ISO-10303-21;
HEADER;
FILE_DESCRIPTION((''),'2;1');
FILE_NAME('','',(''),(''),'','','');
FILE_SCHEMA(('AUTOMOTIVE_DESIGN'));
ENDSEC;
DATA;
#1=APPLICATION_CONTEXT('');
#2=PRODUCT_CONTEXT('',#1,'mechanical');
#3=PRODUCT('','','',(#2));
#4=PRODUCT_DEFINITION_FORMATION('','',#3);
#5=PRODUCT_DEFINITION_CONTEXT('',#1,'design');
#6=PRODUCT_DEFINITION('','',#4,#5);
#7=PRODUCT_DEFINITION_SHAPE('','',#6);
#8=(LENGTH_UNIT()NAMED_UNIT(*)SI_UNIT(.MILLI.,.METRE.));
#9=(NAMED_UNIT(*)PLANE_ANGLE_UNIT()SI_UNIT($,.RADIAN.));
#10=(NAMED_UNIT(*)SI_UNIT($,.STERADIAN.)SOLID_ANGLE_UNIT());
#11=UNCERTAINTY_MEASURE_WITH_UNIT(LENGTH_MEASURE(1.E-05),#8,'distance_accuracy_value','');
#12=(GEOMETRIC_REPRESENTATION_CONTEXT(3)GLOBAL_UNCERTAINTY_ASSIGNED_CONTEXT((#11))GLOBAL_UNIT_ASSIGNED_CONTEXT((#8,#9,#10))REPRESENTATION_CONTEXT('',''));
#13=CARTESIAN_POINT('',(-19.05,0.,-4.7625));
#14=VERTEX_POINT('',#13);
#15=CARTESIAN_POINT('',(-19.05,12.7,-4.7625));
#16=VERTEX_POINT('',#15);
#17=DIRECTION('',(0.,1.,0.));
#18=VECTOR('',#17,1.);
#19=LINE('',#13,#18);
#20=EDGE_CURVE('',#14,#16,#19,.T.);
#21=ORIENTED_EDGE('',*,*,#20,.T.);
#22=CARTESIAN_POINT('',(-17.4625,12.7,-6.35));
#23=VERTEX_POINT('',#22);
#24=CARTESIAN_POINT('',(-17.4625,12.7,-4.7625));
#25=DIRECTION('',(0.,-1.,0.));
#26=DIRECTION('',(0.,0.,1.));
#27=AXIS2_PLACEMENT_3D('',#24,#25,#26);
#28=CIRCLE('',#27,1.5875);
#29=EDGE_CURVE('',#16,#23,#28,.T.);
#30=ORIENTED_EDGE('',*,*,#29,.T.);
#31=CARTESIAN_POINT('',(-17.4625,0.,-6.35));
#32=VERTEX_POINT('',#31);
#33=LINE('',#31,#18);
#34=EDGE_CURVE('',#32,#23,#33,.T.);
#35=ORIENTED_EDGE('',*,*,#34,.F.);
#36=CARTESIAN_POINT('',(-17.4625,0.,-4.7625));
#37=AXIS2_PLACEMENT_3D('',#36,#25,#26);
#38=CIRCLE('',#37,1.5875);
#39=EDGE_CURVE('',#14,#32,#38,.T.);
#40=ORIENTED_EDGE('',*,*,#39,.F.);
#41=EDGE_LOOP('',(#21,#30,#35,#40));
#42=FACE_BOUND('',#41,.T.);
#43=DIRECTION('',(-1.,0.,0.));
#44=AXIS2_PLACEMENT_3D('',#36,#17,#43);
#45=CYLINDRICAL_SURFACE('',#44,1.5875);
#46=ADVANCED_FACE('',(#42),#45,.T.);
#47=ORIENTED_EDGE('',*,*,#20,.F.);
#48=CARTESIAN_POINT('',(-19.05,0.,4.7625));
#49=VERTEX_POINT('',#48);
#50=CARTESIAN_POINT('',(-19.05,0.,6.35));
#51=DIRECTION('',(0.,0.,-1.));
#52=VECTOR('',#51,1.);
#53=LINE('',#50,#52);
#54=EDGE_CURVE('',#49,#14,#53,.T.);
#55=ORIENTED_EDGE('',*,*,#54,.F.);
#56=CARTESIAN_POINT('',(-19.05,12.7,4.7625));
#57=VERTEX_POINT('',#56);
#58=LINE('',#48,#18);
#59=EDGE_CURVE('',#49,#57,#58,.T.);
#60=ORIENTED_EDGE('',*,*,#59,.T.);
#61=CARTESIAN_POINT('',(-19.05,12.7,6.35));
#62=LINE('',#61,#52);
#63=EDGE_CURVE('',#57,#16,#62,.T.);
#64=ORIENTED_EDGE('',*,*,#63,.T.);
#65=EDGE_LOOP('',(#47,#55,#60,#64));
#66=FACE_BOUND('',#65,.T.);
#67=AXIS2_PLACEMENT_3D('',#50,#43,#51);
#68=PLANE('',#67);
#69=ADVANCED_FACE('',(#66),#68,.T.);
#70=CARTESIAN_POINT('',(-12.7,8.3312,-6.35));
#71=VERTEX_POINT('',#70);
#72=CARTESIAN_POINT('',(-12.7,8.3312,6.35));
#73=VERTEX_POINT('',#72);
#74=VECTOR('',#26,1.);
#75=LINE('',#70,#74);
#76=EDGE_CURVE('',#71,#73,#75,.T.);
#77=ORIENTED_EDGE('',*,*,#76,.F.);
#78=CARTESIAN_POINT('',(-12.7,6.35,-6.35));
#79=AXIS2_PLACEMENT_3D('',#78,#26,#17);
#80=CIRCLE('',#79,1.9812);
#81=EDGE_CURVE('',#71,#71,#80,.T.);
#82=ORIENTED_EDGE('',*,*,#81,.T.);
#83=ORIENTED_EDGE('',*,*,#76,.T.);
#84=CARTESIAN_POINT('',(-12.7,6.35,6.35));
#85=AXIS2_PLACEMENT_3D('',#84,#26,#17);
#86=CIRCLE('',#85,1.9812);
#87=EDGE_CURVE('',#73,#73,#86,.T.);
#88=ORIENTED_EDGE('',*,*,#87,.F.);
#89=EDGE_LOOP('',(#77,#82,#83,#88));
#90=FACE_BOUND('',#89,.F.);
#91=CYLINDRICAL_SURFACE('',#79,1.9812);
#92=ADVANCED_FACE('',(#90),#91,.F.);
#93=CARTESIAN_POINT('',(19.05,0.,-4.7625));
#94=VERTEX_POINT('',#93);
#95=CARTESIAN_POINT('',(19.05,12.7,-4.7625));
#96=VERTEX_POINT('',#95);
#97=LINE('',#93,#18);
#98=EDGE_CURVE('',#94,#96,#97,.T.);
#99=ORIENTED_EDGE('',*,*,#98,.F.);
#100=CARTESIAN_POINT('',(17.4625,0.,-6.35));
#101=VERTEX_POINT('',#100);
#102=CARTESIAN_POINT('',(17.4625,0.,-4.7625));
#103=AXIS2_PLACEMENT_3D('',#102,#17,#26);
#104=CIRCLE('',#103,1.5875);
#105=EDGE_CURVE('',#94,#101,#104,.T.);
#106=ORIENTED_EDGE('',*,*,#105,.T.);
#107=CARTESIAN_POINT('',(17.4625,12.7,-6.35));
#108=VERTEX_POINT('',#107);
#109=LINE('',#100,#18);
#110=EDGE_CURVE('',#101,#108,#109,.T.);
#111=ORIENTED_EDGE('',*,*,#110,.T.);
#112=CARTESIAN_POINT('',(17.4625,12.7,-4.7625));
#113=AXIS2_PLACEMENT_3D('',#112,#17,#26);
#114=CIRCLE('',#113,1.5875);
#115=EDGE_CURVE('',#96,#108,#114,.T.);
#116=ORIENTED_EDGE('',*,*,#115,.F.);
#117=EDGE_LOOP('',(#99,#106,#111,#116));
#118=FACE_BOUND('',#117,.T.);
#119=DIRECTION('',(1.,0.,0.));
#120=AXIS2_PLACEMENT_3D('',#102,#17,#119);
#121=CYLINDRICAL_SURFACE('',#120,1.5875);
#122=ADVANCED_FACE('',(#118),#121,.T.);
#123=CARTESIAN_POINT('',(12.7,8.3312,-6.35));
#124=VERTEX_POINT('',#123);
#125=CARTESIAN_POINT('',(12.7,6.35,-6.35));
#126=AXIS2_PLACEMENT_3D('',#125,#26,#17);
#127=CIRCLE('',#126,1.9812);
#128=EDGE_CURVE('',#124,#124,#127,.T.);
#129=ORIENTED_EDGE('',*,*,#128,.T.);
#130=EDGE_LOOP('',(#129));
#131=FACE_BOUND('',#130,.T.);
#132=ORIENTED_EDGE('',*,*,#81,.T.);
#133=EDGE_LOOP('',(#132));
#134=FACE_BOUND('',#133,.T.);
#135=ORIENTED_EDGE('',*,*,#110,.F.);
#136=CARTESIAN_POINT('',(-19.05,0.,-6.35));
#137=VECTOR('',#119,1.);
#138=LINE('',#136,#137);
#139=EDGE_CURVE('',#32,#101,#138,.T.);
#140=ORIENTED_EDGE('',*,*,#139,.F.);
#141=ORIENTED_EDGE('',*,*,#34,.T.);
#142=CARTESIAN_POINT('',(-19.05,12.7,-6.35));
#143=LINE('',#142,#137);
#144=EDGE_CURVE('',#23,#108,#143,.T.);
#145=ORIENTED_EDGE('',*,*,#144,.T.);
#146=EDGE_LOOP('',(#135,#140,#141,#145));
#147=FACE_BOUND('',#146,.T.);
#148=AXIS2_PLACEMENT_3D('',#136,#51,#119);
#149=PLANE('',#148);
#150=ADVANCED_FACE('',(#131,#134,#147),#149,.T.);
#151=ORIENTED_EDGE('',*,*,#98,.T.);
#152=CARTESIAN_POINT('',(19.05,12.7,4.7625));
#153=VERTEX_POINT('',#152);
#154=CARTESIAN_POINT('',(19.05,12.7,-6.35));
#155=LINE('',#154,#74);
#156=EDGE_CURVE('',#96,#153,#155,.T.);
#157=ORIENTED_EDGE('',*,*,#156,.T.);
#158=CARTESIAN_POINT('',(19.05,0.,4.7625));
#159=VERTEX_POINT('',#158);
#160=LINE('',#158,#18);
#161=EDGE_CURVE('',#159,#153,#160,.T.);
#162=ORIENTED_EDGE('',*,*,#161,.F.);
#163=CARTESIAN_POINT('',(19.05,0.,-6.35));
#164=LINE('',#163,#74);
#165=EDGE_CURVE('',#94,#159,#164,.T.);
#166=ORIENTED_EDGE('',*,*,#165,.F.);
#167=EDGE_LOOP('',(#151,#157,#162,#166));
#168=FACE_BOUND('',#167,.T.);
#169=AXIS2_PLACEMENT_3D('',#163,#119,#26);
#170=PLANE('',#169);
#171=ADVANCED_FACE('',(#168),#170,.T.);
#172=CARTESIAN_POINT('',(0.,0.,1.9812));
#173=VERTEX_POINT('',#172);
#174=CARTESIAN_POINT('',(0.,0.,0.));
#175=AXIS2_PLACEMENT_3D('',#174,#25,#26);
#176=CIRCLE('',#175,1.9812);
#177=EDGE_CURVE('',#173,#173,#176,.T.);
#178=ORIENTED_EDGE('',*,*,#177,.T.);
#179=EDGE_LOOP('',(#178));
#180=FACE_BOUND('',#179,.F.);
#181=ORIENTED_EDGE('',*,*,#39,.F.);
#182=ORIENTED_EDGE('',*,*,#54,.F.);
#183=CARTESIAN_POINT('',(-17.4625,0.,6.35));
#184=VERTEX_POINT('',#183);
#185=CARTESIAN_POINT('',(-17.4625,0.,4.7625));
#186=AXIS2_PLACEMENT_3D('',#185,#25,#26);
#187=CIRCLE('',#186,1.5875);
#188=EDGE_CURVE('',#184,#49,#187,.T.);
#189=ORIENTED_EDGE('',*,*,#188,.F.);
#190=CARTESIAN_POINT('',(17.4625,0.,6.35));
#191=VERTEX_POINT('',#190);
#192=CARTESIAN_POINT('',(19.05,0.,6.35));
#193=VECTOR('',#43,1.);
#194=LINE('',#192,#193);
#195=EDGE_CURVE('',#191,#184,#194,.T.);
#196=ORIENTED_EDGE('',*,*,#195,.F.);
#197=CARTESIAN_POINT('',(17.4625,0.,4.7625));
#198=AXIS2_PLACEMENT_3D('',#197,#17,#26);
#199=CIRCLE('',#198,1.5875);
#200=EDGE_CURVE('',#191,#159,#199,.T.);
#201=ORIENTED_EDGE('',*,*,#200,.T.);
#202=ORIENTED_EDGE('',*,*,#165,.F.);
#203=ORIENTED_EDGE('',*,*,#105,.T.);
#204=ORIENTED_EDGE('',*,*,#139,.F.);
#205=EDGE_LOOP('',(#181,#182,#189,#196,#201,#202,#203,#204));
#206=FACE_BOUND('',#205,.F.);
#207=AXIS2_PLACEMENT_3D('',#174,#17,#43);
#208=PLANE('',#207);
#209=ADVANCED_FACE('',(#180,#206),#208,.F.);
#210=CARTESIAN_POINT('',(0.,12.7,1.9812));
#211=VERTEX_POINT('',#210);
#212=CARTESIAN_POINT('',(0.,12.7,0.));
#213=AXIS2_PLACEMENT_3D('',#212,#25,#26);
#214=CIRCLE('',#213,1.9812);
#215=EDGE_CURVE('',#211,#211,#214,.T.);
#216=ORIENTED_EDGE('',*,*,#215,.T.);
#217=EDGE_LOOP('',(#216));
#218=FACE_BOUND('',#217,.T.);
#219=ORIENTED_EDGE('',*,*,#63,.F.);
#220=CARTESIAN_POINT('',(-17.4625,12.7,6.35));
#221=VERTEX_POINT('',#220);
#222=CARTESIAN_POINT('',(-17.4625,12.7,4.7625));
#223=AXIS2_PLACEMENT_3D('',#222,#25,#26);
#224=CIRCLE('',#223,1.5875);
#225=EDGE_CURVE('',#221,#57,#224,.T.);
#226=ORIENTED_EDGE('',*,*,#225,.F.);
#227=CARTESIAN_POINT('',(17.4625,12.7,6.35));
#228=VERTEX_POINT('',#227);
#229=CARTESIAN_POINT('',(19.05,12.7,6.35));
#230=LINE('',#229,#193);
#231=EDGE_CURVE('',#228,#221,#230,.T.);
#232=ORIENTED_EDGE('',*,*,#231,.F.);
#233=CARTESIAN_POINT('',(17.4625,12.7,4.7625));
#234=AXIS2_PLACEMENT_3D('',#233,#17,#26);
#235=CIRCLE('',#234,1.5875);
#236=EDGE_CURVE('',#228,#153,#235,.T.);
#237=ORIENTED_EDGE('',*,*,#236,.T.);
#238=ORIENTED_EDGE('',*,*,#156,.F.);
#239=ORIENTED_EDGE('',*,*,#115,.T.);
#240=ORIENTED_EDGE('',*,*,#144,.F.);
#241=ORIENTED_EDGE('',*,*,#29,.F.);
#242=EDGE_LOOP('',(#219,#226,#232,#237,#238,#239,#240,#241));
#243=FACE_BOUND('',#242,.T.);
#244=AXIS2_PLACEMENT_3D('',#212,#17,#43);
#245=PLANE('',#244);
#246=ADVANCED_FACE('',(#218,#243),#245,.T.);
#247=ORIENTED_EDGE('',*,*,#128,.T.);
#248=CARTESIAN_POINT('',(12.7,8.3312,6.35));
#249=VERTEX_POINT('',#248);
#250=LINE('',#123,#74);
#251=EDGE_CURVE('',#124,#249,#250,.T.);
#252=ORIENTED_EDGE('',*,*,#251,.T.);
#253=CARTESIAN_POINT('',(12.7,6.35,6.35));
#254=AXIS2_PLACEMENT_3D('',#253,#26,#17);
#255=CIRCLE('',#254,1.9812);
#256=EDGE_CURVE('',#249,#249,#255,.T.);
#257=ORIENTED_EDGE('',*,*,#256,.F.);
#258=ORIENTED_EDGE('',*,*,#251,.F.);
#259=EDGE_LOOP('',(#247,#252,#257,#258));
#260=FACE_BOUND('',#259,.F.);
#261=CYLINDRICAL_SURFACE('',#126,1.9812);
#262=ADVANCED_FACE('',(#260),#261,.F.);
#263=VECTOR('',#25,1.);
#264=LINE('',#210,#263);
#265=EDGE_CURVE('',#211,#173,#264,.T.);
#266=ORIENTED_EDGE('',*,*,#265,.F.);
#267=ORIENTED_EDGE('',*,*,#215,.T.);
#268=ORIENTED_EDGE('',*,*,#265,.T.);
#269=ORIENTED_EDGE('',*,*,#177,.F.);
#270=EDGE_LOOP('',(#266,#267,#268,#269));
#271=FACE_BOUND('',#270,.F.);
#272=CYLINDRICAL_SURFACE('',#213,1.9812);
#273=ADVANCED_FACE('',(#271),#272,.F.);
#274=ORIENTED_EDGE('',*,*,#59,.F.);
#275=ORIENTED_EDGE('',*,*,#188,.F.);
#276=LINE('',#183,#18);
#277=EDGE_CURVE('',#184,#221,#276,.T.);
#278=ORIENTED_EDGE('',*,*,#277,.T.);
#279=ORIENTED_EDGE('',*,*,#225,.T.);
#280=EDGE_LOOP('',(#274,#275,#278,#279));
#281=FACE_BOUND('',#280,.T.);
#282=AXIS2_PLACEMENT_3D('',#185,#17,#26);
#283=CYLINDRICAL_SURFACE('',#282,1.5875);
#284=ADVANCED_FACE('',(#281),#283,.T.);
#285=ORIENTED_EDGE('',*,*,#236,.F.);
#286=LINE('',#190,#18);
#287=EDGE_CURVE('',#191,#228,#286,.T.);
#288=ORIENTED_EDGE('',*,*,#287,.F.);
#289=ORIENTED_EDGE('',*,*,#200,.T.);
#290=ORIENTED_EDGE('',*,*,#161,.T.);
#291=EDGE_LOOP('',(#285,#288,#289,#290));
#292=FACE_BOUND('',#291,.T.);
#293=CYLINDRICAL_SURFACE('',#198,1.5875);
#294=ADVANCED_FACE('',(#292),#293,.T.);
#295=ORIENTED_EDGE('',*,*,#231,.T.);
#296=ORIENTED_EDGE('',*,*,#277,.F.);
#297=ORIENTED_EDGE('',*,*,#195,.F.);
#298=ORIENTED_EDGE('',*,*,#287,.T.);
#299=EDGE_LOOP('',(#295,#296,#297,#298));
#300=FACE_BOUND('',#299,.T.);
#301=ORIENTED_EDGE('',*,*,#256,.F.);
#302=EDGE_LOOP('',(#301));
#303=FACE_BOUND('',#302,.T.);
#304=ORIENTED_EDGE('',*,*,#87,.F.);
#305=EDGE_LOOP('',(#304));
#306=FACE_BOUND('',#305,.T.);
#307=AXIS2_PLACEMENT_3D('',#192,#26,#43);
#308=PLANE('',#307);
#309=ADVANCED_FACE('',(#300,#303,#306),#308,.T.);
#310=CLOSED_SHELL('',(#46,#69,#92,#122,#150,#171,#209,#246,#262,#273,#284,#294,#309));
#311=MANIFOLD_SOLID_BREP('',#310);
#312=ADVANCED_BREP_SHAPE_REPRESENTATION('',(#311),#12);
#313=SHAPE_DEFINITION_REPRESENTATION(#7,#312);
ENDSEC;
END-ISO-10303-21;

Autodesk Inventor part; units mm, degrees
ref_plane "YZ Plane" through (0, 0, 0) normal (1, 0, 0) x (0, 1, 0)
ref_plane "XZ Plane" through (0, 0, 0) normal (0, 1, 0) x (-1, 0, 0)
ref_plane "XY Plane" through (0, 0, 0) normal (0, 0, 1) x (1, 0, 0)
sketch "Sketch1" plane through (0, 0, 0) normal (0, 1, 0) x (-1, 0, 0)
  line L0 (-19.05, 6.35) -> (19.05, 6.35)
  line L1 (19.05, 6.35) -> (19.05, -6.35)
  line L2 (19.05, -6.35) -> (-19.05, -6.35)
  line L3 (-19.05, -6.35) -> (-19.05, 6.35)
  line L4 (-19.05, 6.35) -> (19.05, -6.35) construction
  line L5 (19.05, 6.35) -> (-19.05, -6.35) construction
  point P0 (0, 0)
  dimension "d0" = 38.1
  dimension "d1" = 12.7
extrude "Plate1" add sketch "Sketch1" along normal blind 12.7
sketch "Sketch2" plane through (19.05, 0, -6.35) normal (0, 0, -1) x (-1, 0, 0)
  line L0 (0, 0) -> (38.1, 0) construction
  line L1 (19.05, 0) -> (19.05, 12.7) construction
  line L2 (38.1, 12.7) -> (0, 12.7) construction
  point P0 (6.35, 6.35)
  point P1 (31.75, 6.35)
  dimension "d3" = 25.4
  dimension "d4" = 6.35
hole "Hole1" at (12.7, 6.35, -6.35) at (-12.7, 6.35, -6.35) direction (0, 0, 1) diameter 3.9624 end through all thread size "10-32 UNF" class "2B" standard "ANSI Unified Screw Threads"
sketch "Sketch3" plane through (0, 12.7, 0) normal (0, 1, 0) x (1, 0, 0)
  line L0 (-19.05, 6.35) -> (19.05, 6.35) projected
  point P0 (0, 0)
  point P1 (0, 0)
  dimension "d19" = 6.35
hole "Hole2" at (0, 12.7, 0) direction (0, -1, 0) diameter 3.9624 end through all thread size "10-32 UNF" class "2B" standard "ANSI Unified Screw Threads"
fillet "Corner Round1" radius 1.5875 4 edges at (-19.05, 6.35, -6.35) (-19.05, 6.35, 6.35) (19.05, 6.35, -6.35) (19.05, 6.35, 6.35)
equation "\"d10\" = Thickness"
equation "\"d2\" = Thickness"
equation "\"BendRadius\" = Thickness"
equation "\"BendReliefWidth\" = Thickness"
equation "\"BendReliefDepth\" = 0.5 * Thickness"
equation "\"CornerReliefSize\" = 4 * Thickness"
equation "\"MinimumRemnant\" = 2 * Thickness"
equation "\"TransitionRadius\" = BendRadius"
equation "\"JacobiRadiusSize\" = BendRadius"
equation "\"GapSize\" = Thickness"
equation "\"Thickness\" = 12.7"
properties part number "PLATE,NUTBLOCK,BACK" material "Aluminum 6061"
